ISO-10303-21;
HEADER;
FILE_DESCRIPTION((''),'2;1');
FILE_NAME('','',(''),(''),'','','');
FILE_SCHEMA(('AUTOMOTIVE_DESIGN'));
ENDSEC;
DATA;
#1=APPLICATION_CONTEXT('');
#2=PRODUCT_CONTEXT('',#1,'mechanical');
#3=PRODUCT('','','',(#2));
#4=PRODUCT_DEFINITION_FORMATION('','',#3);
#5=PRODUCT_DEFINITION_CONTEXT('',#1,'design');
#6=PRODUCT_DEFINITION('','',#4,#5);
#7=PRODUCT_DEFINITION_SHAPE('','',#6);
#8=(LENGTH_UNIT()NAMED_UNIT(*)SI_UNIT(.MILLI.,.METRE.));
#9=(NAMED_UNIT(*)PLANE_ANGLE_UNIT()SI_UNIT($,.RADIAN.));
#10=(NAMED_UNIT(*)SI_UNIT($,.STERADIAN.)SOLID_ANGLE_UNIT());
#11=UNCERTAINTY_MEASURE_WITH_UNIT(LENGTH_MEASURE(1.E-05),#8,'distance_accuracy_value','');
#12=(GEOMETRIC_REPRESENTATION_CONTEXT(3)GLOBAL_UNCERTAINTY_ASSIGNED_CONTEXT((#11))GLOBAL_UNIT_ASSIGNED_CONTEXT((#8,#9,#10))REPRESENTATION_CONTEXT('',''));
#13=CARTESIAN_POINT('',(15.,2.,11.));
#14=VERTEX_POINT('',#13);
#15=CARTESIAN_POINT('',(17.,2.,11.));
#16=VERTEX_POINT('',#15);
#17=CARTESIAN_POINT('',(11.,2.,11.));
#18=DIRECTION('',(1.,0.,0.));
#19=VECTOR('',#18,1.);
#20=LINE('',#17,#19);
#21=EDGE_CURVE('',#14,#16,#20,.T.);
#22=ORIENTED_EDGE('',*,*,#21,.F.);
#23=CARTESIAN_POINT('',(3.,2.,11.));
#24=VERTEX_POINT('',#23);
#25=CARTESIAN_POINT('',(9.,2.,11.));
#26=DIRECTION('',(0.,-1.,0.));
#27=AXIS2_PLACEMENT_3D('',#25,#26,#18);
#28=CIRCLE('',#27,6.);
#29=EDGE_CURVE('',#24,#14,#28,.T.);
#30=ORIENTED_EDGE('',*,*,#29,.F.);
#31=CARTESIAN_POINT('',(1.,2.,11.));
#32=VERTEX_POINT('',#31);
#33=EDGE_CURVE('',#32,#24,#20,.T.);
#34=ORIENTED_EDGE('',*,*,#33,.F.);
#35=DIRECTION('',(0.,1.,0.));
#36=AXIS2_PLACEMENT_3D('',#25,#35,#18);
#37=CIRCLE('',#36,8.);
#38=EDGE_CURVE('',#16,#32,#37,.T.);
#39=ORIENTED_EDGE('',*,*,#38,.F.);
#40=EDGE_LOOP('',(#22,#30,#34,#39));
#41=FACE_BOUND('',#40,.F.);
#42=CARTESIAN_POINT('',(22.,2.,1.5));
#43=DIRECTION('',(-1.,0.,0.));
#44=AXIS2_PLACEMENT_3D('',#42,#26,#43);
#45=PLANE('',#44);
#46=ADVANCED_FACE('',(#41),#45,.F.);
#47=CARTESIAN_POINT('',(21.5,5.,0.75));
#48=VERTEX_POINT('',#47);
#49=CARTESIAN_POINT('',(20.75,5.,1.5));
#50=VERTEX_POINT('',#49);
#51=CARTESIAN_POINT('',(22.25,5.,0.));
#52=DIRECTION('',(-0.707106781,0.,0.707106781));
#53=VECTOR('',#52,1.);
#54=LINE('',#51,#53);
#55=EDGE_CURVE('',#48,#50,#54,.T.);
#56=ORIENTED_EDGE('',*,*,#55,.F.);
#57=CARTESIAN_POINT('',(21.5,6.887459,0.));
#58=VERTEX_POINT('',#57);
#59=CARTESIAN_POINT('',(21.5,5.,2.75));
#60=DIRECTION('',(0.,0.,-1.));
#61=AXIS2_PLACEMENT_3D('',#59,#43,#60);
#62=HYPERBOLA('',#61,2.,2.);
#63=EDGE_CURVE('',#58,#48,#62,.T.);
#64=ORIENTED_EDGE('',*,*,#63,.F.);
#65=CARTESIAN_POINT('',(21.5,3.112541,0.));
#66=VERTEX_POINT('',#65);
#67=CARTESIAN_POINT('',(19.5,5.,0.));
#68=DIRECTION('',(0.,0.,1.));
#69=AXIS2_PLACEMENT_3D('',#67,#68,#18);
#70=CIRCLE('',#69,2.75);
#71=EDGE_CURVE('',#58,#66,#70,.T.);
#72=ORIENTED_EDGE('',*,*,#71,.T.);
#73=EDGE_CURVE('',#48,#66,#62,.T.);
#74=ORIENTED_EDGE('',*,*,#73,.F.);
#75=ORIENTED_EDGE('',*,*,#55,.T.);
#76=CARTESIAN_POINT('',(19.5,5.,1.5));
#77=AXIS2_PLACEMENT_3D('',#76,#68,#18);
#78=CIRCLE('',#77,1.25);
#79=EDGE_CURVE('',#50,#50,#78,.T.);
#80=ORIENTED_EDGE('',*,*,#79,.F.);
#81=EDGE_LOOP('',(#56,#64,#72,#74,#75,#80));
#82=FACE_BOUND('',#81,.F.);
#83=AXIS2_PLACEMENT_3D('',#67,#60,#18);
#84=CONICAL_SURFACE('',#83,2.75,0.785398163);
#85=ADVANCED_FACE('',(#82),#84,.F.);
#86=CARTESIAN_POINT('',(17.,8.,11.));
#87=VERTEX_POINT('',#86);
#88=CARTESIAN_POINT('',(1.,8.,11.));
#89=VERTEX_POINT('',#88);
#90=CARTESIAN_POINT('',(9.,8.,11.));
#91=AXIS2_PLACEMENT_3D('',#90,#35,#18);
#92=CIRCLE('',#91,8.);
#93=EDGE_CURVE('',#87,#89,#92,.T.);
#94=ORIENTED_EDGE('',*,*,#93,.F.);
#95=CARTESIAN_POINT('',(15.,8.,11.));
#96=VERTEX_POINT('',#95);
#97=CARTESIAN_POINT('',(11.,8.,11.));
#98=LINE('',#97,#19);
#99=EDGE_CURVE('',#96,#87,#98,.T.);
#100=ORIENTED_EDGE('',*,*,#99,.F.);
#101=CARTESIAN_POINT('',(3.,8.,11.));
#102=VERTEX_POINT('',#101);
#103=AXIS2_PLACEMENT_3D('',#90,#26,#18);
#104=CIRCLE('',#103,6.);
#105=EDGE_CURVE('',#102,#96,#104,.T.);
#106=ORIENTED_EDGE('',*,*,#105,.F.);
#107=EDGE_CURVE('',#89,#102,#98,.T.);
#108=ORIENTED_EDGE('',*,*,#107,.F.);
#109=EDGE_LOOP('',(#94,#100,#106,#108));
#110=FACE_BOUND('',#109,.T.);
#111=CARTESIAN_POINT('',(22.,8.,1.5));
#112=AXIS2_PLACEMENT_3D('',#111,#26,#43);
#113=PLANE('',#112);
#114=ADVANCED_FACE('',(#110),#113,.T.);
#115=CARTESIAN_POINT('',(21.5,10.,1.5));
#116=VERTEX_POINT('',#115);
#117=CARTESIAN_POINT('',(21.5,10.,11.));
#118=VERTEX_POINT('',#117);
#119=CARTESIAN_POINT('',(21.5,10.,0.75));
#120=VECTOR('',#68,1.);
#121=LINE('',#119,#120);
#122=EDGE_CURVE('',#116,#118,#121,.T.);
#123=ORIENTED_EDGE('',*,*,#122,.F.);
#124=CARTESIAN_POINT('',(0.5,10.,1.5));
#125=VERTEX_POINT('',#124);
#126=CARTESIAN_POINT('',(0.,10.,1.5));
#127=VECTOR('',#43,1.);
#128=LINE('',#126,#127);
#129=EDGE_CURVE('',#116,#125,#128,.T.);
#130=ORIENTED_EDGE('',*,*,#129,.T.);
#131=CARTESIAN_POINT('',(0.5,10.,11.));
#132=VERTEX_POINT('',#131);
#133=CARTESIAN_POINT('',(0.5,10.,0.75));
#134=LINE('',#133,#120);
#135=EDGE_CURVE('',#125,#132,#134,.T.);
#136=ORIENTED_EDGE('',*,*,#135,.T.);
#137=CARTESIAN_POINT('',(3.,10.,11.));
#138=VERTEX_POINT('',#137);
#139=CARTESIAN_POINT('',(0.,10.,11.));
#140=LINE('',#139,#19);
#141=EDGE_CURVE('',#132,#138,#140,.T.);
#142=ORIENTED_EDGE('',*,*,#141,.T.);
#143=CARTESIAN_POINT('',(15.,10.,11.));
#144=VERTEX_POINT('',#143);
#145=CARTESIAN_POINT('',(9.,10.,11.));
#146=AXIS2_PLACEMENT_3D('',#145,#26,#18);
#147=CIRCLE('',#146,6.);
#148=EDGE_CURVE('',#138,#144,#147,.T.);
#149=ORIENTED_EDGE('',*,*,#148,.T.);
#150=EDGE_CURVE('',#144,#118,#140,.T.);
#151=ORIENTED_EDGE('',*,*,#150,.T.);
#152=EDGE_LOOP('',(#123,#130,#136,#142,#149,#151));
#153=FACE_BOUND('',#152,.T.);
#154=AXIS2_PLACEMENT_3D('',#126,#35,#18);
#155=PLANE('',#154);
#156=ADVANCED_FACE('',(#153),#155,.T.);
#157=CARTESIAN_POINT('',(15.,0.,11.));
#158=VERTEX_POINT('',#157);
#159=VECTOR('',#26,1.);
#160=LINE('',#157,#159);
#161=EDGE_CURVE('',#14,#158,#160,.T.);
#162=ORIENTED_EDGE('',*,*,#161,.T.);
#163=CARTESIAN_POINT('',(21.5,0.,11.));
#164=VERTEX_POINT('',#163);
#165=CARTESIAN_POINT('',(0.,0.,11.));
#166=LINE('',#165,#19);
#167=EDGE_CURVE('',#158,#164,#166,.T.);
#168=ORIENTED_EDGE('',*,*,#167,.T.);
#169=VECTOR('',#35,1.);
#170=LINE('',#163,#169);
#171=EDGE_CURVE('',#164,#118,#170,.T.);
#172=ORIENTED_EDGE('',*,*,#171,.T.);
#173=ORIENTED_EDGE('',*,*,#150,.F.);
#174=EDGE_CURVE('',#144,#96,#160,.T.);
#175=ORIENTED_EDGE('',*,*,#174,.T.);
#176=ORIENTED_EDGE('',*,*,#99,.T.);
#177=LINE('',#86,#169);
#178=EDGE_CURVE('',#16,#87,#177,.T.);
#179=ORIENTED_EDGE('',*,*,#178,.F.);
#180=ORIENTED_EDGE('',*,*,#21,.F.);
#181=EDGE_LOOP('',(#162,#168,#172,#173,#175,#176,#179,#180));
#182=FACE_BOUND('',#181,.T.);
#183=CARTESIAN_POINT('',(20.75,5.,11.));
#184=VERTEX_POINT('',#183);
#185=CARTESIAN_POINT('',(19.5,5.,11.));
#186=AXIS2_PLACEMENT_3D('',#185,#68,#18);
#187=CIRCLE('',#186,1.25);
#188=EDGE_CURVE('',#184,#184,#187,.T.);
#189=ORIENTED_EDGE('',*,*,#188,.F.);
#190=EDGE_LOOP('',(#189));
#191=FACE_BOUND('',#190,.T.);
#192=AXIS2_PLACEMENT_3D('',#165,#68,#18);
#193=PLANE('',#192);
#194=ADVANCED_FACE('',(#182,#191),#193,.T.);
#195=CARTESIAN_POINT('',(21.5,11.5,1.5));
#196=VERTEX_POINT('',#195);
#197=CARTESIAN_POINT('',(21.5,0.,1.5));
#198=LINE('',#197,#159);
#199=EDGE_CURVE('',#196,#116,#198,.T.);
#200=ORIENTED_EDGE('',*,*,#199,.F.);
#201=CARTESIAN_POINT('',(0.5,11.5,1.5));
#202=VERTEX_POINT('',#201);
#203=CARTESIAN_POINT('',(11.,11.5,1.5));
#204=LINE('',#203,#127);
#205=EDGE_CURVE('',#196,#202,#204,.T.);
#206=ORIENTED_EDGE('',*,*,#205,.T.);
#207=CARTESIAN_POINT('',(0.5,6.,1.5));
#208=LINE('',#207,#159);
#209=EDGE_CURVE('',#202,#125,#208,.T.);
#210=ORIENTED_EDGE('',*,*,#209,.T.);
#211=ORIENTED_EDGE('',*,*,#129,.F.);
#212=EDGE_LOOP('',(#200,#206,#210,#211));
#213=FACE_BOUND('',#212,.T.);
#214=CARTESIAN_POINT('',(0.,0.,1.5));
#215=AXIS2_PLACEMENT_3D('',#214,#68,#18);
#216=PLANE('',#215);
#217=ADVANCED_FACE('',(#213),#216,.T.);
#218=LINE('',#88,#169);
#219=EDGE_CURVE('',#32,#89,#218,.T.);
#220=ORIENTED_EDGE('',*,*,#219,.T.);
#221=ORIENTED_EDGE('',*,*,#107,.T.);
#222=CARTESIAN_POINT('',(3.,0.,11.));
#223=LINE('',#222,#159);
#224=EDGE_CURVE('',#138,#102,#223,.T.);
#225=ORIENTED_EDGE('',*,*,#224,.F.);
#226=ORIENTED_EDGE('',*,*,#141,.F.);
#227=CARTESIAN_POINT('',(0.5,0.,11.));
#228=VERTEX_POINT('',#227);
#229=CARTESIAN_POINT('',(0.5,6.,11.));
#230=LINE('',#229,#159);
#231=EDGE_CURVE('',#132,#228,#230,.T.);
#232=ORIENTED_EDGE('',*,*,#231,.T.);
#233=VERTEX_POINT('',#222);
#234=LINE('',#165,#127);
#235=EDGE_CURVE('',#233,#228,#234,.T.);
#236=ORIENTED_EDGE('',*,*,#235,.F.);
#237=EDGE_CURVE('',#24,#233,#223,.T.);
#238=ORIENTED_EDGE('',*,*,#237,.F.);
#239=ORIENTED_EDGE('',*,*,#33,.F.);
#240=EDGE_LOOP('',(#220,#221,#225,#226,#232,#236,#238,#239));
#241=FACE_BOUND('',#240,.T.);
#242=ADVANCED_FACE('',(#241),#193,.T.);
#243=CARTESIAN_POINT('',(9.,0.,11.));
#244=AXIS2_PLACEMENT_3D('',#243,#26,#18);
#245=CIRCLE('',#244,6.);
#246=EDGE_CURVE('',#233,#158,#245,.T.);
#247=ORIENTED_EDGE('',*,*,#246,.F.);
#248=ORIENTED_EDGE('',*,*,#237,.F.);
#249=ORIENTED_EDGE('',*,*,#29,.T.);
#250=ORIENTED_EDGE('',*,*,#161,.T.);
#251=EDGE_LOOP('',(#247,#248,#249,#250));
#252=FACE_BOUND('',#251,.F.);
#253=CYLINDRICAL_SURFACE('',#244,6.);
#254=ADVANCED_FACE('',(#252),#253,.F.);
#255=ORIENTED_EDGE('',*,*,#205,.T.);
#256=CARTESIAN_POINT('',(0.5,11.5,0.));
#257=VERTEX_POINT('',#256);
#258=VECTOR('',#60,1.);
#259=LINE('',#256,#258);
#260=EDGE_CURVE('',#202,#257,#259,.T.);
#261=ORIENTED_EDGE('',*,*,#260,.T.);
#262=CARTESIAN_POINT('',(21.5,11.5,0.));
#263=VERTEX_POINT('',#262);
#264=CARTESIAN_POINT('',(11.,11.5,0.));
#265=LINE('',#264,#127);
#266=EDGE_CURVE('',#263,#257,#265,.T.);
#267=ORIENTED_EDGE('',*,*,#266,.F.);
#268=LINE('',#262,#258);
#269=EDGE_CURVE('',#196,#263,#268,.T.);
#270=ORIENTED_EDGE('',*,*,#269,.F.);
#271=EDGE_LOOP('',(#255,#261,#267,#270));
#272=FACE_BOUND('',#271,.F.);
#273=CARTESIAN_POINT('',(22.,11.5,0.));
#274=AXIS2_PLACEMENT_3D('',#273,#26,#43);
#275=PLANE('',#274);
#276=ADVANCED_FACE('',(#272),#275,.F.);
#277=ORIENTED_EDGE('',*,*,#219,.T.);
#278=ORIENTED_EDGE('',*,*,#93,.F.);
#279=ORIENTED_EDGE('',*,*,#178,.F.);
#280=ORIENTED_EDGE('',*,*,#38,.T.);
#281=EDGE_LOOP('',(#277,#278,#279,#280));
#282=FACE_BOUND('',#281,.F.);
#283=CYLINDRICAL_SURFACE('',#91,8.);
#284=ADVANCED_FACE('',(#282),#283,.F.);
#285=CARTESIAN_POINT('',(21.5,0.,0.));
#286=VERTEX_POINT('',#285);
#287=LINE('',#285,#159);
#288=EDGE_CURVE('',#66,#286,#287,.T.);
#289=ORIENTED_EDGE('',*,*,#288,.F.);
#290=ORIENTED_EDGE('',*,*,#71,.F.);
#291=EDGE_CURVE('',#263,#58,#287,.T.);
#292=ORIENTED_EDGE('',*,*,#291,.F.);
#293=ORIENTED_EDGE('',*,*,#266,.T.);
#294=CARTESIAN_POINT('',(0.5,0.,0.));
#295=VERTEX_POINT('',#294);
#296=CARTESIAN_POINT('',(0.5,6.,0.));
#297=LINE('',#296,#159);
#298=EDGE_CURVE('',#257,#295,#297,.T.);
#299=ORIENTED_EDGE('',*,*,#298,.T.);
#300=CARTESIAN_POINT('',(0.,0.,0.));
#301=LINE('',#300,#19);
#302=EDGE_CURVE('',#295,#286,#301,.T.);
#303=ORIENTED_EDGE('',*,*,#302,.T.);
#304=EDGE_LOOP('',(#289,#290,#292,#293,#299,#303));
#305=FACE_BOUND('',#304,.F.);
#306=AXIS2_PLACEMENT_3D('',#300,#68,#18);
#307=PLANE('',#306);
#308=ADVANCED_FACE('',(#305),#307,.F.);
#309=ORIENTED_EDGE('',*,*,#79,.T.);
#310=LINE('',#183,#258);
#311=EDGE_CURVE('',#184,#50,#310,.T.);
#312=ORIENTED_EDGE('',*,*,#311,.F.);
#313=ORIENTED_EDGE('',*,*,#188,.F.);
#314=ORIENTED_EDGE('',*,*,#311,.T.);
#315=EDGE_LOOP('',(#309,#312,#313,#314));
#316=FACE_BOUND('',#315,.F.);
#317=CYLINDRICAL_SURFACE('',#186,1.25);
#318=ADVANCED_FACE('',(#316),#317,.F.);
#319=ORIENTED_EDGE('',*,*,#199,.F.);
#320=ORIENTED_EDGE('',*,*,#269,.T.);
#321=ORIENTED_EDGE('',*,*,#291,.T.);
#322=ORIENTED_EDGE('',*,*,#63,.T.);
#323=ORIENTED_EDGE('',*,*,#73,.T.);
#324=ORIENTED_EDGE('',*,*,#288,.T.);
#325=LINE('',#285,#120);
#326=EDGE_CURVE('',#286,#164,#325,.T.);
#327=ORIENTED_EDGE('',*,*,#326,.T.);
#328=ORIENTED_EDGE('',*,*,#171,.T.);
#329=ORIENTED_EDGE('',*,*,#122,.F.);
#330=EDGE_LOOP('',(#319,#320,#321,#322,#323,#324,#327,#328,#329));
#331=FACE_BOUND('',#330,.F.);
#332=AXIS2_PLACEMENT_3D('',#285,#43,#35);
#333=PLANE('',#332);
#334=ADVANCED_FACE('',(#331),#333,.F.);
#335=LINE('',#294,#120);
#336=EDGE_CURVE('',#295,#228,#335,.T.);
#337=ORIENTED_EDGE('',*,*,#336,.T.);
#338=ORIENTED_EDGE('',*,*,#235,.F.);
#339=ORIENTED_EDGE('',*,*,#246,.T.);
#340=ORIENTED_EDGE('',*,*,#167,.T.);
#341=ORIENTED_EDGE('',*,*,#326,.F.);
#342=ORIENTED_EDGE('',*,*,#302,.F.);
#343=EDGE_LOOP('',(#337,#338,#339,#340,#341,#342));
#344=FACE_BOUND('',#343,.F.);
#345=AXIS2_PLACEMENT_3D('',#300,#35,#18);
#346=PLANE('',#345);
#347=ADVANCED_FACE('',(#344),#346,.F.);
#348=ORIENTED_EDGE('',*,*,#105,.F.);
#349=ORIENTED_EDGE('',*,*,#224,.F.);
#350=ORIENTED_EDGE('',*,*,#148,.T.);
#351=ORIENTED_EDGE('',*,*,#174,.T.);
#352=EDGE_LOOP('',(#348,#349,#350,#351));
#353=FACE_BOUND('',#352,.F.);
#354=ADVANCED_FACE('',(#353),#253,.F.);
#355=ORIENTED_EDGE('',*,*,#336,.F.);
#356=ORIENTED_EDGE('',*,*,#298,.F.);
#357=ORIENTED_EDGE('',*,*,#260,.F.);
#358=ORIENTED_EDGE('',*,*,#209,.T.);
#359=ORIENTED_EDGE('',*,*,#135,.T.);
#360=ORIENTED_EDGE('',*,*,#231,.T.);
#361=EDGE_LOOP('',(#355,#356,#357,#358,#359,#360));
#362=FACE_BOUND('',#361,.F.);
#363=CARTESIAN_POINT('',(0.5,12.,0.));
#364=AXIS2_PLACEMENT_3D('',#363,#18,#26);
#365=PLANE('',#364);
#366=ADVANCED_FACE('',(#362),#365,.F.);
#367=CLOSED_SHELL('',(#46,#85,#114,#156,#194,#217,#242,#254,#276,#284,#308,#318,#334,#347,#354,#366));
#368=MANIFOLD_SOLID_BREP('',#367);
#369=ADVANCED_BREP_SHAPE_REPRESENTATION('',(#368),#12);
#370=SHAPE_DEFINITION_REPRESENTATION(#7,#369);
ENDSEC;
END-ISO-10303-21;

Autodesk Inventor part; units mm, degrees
ref_plane "YZ Plane" through (0, 0, 0) normal (1, 0, 0) x (0, 1, 0)
ref_plane "XZ Plane" through (0, 0, 0) normal (0, 1, 0) x (-1, 0, 0)
ref_plane "XY Plane" through (0, 0, 0) normal (0, 0, 1) x (1, 0, 0)
sketch "Sketch1" plane through (0, 0, 0) normal (0, 0, 1) x (1, 0, 0)
  line L0 (0, 0) -> (22, 0)
  line L1 (22, 0) -> (22, 12)
  line L2 (22, 12) -> (0, 12)
  line L3 (0, 12) -> (0, 0)
  dimension "d0" = 22
  dimension "d1" = 12
extrude "Extrusion1" add sketch "Sketch1" along normal blind 1.5
sketch "Sketch2" plane through (0, 0, 1.5) normal (0, 0, 1) x (1, 0, 0)
  line L0 (22, 0) -> (22, 12) projected
  line L1 (0, 12) -> (0, 0) projected
  line L2 (22, 8) -> (0, 8)
  line L3 (0, 8) -> (0, 2)
  line L4 (0, 2) -> (22, 2)
  line L5 (22, 2) -> (22, 8)
  line L6 (0, 0) -> (22, 0) projected
  point P0 (0, 8)
  dimension "d4" = 2
  dimension "d5" = 6
extrude "Extrusion2" add sketch "Sketch2" along normal blind 9.5 contours L4 L1 L2 L0
sketch "Sketch3" plane through (0, 8, 1.5) normal (0, 1, 0) x (1, 0, 0)
  line L0 (0, -9.5) -> (22, -9.5) projected
  circle A0 centre (9, -9.5) radius 8
  line L1 (0, 0) -> (0, -9.5) projected
  point P0 (0, 1.5)
  point P1 (17, -9.5)
  point P2 (1, -9.5)
  dimension "d8" = 16
  dimension "d9" = 1
extrude "Extrusion3" cut sketch "Sketch3" against normal through all contours A0 L0 picked at (10.996, -7.7317)
sketch "Sketch4" plane through (0, 0, 1.5) normal (0, 0, 1) x (1, 0, 0)
  line L0 (0, 0) -> (22, 0) projected
  line L1 (22, 2) -> (0, 2) projected
  line L2 (0, 0) -> (22, 0)
  line L3 (22, 0) -> (22, 2)
  line L4 (22, 2) -> (0, 2)
  line L5 (0, 2) -> (0, 0)
  line L6 (22, 0) -> (22, 12) projected
  line L7 (0, 12) -> (0, 0) projected
  line L8 (22, 8) -> (0, 8)
  line L9 (0, 8) -> (0, 10)
  line L10 (0, 10) -> (22, 10)
  line L11 (22, 10) -> (22, 8)
extrude "Extrusion4" add sketch "Sketch4" along normal up to surface (9.5 mm away) contours L5 L1 L3 L0 | L7 L10 L6 L8
sketch "Sketch5" plane through (0, 0, 0) normal (0, -1, 0) x (1, 0, 0)
  arc A0 (1, 11) -> (17, 11) centre (9, 11) ccw projected
  circle A1 centre (9, 11) radius 6
  point P0 (0, 0)
extrude "Extrusion5" cut sketch "Sketch5" against normal through all
sketch "Sketch6" plane through (0, 0, 11) normal (0, 0, 1) x (1, 0, 0)
  circle A0 centre (19.5, 5) radius 1.25
  line L0 (22, 10) -> (22, 0) projected
  line L1 (22, 0) -> (15, 0) projected
  point P0 (0, 0)
  dimension "d16" = 2.5
  dimension "d17" = 2.5
  dimension "d18" = 5
extrude "Extrusion6" cut sketch "Sketch6" against normal through all
thicken "Thicken1" operation add thickness 0.5 both sides no extend neighbours yes toward (1, 0, 0) faces at (0, 3.3333, 4.1667) (14.6667, 12, 1) (22, 3.3333, 4.1667)
chamfer "Chamfer1" distance 1.5 angle 45 1 edges at (18.25, 5, 0)
properties part number "bearingholder"
